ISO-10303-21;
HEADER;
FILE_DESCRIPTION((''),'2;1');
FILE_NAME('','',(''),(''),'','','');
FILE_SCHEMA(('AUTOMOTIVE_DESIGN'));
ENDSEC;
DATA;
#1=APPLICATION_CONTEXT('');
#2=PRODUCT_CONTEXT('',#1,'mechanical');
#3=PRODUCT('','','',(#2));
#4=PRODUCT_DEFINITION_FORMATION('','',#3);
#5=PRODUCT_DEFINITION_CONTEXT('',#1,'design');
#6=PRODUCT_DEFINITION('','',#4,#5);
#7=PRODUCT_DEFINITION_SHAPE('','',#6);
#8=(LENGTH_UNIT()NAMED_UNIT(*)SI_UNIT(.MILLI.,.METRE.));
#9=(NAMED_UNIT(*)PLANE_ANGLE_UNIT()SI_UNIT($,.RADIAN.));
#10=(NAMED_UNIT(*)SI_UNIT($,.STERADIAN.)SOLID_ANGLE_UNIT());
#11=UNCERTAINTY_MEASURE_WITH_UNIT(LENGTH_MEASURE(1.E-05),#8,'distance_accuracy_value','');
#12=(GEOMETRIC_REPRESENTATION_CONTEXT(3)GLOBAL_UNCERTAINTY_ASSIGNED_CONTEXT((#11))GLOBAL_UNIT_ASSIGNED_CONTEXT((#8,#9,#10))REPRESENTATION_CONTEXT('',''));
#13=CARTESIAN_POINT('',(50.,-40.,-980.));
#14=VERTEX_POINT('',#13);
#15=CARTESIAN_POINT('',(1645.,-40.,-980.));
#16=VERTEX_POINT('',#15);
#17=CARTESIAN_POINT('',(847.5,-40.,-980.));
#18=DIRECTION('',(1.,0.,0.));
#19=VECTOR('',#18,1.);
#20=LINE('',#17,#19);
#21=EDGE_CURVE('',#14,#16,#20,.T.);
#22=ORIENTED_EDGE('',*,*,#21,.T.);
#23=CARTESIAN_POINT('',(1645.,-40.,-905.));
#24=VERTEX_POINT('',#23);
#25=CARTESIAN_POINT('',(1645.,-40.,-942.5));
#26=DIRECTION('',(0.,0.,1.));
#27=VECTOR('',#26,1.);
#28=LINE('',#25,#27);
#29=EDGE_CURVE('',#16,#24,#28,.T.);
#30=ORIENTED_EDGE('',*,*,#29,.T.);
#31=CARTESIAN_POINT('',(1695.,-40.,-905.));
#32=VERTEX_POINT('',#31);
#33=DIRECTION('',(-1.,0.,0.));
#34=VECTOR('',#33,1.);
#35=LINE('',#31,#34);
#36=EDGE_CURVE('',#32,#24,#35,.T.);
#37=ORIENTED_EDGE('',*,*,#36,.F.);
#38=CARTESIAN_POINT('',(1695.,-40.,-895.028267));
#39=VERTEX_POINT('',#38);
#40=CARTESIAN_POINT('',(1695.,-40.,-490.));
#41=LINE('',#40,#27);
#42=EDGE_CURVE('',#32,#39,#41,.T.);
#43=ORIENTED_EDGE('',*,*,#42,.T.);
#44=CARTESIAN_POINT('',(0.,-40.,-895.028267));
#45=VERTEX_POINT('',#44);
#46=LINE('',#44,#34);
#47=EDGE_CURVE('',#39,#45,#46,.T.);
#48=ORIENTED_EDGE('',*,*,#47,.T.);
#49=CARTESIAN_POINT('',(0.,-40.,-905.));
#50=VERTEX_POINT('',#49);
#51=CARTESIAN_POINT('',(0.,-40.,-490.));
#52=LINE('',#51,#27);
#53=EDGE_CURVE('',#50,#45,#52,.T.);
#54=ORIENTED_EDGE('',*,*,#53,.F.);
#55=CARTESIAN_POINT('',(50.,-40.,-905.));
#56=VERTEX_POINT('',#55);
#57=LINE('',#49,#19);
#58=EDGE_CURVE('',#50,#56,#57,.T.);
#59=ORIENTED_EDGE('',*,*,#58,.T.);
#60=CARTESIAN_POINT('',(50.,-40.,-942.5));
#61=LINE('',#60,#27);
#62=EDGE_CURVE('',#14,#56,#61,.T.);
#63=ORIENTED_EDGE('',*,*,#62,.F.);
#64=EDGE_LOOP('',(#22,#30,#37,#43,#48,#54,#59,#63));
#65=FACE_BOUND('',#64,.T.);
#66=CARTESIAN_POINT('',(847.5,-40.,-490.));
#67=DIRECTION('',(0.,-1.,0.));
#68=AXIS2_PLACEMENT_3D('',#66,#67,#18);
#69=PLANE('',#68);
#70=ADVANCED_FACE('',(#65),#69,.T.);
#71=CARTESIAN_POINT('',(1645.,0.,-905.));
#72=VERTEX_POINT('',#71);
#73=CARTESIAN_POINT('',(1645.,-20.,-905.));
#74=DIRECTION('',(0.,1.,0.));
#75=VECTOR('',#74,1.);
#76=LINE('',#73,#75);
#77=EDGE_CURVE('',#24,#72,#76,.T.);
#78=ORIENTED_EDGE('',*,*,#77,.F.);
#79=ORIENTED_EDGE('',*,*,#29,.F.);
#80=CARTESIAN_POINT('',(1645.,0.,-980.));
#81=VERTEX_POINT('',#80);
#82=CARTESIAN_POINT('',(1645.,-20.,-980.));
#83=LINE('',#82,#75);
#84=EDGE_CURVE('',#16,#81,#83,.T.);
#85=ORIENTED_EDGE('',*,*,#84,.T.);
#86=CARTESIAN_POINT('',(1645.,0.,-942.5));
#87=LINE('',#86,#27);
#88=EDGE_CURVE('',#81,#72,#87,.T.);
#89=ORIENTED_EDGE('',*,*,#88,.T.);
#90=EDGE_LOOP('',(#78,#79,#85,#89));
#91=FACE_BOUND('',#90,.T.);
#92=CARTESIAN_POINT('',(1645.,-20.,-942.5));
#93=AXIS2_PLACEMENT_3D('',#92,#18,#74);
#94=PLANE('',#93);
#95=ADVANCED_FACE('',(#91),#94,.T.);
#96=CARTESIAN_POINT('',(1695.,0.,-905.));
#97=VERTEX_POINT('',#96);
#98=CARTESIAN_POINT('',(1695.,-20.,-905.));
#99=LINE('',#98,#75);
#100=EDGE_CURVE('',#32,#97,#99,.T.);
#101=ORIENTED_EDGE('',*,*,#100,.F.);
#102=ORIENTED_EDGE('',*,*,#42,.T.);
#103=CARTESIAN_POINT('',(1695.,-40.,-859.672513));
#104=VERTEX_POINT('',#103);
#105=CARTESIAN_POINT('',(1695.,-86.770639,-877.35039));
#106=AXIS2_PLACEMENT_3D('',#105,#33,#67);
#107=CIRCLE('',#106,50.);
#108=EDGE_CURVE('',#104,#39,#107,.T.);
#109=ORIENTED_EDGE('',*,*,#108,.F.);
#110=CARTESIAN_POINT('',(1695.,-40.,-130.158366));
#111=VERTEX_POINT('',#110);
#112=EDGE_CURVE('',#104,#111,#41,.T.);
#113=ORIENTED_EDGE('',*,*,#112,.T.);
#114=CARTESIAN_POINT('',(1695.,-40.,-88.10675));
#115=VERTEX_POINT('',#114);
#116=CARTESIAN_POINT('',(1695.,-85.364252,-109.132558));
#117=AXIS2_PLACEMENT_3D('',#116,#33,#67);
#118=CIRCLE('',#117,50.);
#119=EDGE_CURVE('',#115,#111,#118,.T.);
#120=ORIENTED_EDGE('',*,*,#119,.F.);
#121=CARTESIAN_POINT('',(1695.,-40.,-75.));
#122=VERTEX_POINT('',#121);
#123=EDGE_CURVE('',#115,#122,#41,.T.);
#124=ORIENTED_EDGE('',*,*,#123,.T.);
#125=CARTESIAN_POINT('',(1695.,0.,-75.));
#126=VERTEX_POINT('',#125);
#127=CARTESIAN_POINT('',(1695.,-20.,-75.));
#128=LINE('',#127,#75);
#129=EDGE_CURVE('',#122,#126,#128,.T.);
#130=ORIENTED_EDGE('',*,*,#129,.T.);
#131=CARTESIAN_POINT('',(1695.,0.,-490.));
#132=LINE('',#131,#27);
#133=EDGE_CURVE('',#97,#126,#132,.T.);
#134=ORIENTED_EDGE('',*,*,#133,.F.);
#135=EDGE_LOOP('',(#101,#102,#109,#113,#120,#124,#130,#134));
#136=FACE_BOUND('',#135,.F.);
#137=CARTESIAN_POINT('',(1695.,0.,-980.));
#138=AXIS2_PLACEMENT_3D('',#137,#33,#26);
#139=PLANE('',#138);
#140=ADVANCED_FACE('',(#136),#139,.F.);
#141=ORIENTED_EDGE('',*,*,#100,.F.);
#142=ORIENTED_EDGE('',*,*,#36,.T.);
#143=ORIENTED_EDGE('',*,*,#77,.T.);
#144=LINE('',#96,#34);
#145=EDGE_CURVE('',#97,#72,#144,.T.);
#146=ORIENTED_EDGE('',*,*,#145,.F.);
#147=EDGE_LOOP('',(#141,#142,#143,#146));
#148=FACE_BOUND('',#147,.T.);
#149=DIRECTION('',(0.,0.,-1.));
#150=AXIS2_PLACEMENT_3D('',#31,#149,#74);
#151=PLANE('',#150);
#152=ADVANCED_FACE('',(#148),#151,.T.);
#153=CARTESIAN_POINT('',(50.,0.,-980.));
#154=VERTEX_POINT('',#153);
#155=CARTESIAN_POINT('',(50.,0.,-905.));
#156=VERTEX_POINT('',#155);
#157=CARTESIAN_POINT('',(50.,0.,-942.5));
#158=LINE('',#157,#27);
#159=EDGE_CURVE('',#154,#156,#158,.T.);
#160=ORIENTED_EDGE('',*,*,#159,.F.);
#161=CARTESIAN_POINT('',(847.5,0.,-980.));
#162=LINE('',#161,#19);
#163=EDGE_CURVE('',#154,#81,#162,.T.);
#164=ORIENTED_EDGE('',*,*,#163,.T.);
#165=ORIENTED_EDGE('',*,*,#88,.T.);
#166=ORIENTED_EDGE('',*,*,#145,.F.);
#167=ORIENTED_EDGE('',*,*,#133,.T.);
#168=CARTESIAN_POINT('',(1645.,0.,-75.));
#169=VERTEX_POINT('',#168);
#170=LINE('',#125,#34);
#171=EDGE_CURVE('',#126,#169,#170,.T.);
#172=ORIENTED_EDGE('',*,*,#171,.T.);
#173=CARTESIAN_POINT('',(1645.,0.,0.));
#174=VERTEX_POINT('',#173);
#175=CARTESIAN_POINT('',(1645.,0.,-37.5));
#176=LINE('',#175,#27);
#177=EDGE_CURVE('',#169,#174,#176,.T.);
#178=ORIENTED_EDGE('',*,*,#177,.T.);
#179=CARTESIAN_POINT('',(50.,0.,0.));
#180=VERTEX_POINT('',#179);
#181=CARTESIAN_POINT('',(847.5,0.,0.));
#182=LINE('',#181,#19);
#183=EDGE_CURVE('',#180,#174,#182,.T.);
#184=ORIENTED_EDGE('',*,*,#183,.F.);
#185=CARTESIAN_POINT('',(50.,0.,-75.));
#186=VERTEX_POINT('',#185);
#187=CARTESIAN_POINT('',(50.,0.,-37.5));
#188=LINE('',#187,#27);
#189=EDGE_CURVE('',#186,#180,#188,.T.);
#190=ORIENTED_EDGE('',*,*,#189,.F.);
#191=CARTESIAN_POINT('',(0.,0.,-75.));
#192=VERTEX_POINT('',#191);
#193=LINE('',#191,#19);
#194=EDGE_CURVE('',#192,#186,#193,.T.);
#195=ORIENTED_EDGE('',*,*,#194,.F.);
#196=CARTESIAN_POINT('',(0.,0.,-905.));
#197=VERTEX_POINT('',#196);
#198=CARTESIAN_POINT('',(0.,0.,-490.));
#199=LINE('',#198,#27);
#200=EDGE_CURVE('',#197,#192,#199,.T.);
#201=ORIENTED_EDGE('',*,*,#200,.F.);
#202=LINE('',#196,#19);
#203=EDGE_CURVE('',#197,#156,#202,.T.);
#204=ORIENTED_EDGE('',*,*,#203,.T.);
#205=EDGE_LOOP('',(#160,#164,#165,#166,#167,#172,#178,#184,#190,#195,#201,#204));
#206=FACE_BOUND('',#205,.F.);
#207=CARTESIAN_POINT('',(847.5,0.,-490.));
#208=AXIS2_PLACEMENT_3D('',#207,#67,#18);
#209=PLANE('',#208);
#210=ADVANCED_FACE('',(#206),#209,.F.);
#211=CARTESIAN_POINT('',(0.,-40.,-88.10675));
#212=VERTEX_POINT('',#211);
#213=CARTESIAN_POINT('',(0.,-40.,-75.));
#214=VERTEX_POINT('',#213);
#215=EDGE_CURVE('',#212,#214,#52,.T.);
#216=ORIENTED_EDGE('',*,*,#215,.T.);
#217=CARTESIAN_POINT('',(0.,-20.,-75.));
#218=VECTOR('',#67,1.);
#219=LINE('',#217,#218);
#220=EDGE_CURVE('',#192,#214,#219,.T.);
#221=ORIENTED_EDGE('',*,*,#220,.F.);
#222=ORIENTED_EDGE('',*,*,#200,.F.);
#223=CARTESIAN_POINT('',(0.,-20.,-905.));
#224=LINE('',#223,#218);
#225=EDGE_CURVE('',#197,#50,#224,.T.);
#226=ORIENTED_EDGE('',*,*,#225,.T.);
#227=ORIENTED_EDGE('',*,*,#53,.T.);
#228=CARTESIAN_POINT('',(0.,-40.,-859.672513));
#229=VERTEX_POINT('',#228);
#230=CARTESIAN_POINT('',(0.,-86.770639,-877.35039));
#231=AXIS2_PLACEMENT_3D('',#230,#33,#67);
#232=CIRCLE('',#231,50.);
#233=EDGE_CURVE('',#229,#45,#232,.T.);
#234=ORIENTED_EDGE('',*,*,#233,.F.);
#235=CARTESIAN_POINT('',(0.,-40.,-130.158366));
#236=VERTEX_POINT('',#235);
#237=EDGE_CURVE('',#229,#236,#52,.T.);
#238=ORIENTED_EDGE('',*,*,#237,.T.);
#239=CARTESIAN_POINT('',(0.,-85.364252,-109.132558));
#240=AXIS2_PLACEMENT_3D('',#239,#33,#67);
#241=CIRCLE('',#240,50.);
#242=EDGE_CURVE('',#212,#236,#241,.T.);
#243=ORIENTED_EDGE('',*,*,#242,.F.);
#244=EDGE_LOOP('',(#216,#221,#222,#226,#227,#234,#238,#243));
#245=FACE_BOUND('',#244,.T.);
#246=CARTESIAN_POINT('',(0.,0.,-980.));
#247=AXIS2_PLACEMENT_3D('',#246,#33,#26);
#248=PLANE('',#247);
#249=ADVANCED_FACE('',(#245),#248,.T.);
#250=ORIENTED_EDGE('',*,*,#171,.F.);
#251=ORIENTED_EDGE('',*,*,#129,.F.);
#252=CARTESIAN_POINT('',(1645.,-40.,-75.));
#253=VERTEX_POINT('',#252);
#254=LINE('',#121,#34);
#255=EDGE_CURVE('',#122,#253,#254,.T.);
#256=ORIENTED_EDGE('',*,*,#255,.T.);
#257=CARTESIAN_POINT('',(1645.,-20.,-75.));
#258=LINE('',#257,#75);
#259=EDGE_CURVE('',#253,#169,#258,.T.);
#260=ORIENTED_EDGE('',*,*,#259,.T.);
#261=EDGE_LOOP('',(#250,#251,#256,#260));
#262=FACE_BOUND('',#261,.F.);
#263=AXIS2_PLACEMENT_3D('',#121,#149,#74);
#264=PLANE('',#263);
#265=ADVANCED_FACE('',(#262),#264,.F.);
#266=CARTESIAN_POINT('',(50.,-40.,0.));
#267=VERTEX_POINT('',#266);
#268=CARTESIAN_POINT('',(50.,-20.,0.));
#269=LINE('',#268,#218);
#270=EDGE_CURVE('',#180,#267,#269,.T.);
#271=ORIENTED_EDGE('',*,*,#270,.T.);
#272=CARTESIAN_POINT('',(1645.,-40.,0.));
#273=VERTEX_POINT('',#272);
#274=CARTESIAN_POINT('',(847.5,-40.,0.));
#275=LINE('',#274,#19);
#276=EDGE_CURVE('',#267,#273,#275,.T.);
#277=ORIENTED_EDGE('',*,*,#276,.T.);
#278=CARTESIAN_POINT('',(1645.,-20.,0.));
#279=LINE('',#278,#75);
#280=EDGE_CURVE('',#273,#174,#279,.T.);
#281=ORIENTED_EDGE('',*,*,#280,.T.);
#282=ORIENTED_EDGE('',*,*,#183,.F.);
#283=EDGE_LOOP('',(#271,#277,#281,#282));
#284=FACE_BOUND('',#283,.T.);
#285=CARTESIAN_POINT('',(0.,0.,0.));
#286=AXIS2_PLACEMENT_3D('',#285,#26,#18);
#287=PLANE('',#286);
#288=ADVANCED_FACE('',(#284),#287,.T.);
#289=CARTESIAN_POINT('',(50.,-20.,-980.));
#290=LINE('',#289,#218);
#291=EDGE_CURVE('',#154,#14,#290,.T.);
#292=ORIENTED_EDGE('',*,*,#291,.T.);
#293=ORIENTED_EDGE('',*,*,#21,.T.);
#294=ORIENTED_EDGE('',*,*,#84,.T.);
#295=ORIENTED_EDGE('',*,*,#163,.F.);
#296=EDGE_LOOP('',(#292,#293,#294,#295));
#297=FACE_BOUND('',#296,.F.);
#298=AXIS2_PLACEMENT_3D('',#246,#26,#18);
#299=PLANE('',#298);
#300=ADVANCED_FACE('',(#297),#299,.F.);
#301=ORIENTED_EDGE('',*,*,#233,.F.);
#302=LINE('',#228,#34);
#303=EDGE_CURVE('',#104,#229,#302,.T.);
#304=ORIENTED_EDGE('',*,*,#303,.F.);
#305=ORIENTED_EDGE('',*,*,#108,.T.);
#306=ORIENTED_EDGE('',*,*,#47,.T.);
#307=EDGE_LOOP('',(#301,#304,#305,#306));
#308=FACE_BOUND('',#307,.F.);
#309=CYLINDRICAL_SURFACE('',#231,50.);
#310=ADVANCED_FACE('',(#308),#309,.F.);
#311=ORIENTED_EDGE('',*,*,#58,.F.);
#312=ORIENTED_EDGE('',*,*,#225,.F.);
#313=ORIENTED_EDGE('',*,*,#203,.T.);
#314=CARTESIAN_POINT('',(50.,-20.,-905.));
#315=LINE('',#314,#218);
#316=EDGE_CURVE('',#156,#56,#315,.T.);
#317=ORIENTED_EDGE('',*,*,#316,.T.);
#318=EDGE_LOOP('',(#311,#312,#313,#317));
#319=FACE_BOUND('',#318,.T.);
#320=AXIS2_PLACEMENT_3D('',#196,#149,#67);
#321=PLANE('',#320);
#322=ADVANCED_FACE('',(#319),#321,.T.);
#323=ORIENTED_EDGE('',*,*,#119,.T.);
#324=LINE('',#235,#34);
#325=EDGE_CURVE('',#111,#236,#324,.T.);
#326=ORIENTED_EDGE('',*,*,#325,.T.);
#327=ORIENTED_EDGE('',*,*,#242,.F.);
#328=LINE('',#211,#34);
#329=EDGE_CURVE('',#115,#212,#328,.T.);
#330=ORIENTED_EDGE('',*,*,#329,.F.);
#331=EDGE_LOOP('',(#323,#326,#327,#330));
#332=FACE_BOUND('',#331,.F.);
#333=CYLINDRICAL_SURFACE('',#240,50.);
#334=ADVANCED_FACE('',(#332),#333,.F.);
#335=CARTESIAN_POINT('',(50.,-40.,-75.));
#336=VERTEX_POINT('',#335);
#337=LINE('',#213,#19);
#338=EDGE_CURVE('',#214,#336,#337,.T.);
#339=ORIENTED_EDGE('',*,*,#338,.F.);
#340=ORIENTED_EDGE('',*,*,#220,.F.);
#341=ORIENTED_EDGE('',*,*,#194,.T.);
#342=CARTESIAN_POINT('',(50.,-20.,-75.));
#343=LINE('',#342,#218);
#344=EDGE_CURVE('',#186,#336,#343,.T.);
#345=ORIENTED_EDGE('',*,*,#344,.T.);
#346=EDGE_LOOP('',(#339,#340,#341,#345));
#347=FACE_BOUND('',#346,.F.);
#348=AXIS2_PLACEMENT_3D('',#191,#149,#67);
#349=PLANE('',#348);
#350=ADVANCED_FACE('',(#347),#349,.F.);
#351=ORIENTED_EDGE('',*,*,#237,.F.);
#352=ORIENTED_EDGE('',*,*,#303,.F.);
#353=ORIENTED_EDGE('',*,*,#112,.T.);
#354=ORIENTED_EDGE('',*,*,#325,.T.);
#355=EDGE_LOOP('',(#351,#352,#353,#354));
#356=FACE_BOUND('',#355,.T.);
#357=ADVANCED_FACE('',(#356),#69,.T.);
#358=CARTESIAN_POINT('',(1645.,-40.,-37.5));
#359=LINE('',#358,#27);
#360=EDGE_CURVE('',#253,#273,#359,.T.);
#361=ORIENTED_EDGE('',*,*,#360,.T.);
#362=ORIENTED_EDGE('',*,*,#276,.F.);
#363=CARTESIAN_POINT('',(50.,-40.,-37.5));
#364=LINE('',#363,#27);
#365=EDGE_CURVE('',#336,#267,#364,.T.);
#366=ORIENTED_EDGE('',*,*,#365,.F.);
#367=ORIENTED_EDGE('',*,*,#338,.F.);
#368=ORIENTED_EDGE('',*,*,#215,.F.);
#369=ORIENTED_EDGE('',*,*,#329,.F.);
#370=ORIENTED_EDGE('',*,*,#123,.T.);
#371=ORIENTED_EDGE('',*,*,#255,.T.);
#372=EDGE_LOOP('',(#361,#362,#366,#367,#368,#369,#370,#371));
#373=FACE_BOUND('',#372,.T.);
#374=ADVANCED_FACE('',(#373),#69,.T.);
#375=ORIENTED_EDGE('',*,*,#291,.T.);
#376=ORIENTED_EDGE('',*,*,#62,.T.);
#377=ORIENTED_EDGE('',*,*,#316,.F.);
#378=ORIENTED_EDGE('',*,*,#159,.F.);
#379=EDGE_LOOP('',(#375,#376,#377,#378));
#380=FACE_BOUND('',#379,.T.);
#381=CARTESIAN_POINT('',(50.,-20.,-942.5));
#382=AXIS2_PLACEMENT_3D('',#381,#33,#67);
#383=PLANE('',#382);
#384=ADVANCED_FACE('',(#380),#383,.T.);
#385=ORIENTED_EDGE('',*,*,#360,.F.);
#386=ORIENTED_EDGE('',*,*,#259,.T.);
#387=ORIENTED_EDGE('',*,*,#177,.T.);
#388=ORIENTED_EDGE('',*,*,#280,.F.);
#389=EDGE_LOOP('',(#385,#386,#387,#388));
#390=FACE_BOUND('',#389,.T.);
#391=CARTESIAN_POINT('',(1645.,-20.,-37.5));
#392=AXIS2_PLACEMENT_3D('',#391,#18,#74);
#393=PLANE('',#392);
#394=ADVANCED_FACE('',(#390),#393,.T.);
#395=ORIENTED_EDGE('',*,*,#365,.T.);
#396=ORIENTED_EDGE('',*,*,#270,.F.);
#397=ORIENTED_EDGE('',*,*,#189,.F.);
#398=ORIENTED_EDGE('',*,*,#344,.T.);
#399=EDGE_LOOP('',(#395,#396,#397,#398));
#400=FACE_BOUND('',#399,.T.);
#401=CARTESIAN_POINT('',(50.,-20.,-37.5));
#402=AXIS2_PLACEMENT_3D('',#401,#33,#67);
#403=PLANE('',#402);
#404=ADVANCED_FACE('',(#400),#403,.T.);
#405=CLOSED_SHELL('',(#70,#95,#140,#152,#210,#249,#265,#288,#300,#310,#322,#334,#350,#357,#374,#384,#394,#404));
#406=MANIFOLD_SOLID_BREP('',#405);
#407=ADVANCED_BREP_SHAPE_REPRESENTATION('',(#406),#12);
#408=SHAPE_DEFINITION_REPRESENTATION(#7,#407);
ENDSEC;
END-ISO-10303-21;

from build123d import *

# Parameters (mm, degrees)
F0_W     = 1695
F0_H     = 980
F1_DEPTH = 40
F2_R     = 50
F3_DEPTH = 1695.001
F6_W     = 40
F6_H     = 75
F7_DEPTH = 50
F8_W     = 40
F8_H     = 75
F9_DEPTH = 50


# Not quite as in the source:
# - a feature of the source that left no trace in its solid (it failed there, or was rolled back) is left out


with BuildPart() as f1:
    # F0 (on Front) → F1 (new body)
    with BuildSketch(Plane.XZ):
        with Locations((847.5, -490)):
            Rectangle(F0_W, F0_H)
    extrude(amount=F1_DEPTH)

    # F2 (on face) → F3 (cut, through all)
    with BuildSketch(Plane(origin=(0, 0, 0), x_dir=(0, -1, 0), z_dir=(-1, 0, 0))):
        with Locations((85.3642523289, -109.1325581074)):
            Circle(F2_R)
        with Locations((86.7706388235, -877.3503899574)):
            Circle(F2_R)
    extrude(amount=-F3_DEPTH, mode=Mode.SUBTRACT)

    # F6 (on face) → F7 (cut)
    with BuildSketch(Plane(origin=(0, 0, 0), x_dir=(0, -1, 0), z_dir=(-1, 0, 0))):
        with Locations((20, -37.5)):
            Rectangle(F6_W, F6_H)
        with Locations((20, -942.5)):
            Rectangle(F6_W, F6_H)
    extrude(amount=-F7_DEPTH, mode=Mode.SUBTRACT)

    # F8 (on face) → F9 (cut)
    with BuildSketch(Plane.YZ.offset(1695)):
        with Locations((-20, -37.5)):
            Rectangle(F8_W, F8_H)
        with Locations((-20, -942.5)):
            Rectangle(F8_W, F8_H)
    extrude(amount=-F9_DEPTH, mode=Mode.SUBTRACT)


solid = f1.part
